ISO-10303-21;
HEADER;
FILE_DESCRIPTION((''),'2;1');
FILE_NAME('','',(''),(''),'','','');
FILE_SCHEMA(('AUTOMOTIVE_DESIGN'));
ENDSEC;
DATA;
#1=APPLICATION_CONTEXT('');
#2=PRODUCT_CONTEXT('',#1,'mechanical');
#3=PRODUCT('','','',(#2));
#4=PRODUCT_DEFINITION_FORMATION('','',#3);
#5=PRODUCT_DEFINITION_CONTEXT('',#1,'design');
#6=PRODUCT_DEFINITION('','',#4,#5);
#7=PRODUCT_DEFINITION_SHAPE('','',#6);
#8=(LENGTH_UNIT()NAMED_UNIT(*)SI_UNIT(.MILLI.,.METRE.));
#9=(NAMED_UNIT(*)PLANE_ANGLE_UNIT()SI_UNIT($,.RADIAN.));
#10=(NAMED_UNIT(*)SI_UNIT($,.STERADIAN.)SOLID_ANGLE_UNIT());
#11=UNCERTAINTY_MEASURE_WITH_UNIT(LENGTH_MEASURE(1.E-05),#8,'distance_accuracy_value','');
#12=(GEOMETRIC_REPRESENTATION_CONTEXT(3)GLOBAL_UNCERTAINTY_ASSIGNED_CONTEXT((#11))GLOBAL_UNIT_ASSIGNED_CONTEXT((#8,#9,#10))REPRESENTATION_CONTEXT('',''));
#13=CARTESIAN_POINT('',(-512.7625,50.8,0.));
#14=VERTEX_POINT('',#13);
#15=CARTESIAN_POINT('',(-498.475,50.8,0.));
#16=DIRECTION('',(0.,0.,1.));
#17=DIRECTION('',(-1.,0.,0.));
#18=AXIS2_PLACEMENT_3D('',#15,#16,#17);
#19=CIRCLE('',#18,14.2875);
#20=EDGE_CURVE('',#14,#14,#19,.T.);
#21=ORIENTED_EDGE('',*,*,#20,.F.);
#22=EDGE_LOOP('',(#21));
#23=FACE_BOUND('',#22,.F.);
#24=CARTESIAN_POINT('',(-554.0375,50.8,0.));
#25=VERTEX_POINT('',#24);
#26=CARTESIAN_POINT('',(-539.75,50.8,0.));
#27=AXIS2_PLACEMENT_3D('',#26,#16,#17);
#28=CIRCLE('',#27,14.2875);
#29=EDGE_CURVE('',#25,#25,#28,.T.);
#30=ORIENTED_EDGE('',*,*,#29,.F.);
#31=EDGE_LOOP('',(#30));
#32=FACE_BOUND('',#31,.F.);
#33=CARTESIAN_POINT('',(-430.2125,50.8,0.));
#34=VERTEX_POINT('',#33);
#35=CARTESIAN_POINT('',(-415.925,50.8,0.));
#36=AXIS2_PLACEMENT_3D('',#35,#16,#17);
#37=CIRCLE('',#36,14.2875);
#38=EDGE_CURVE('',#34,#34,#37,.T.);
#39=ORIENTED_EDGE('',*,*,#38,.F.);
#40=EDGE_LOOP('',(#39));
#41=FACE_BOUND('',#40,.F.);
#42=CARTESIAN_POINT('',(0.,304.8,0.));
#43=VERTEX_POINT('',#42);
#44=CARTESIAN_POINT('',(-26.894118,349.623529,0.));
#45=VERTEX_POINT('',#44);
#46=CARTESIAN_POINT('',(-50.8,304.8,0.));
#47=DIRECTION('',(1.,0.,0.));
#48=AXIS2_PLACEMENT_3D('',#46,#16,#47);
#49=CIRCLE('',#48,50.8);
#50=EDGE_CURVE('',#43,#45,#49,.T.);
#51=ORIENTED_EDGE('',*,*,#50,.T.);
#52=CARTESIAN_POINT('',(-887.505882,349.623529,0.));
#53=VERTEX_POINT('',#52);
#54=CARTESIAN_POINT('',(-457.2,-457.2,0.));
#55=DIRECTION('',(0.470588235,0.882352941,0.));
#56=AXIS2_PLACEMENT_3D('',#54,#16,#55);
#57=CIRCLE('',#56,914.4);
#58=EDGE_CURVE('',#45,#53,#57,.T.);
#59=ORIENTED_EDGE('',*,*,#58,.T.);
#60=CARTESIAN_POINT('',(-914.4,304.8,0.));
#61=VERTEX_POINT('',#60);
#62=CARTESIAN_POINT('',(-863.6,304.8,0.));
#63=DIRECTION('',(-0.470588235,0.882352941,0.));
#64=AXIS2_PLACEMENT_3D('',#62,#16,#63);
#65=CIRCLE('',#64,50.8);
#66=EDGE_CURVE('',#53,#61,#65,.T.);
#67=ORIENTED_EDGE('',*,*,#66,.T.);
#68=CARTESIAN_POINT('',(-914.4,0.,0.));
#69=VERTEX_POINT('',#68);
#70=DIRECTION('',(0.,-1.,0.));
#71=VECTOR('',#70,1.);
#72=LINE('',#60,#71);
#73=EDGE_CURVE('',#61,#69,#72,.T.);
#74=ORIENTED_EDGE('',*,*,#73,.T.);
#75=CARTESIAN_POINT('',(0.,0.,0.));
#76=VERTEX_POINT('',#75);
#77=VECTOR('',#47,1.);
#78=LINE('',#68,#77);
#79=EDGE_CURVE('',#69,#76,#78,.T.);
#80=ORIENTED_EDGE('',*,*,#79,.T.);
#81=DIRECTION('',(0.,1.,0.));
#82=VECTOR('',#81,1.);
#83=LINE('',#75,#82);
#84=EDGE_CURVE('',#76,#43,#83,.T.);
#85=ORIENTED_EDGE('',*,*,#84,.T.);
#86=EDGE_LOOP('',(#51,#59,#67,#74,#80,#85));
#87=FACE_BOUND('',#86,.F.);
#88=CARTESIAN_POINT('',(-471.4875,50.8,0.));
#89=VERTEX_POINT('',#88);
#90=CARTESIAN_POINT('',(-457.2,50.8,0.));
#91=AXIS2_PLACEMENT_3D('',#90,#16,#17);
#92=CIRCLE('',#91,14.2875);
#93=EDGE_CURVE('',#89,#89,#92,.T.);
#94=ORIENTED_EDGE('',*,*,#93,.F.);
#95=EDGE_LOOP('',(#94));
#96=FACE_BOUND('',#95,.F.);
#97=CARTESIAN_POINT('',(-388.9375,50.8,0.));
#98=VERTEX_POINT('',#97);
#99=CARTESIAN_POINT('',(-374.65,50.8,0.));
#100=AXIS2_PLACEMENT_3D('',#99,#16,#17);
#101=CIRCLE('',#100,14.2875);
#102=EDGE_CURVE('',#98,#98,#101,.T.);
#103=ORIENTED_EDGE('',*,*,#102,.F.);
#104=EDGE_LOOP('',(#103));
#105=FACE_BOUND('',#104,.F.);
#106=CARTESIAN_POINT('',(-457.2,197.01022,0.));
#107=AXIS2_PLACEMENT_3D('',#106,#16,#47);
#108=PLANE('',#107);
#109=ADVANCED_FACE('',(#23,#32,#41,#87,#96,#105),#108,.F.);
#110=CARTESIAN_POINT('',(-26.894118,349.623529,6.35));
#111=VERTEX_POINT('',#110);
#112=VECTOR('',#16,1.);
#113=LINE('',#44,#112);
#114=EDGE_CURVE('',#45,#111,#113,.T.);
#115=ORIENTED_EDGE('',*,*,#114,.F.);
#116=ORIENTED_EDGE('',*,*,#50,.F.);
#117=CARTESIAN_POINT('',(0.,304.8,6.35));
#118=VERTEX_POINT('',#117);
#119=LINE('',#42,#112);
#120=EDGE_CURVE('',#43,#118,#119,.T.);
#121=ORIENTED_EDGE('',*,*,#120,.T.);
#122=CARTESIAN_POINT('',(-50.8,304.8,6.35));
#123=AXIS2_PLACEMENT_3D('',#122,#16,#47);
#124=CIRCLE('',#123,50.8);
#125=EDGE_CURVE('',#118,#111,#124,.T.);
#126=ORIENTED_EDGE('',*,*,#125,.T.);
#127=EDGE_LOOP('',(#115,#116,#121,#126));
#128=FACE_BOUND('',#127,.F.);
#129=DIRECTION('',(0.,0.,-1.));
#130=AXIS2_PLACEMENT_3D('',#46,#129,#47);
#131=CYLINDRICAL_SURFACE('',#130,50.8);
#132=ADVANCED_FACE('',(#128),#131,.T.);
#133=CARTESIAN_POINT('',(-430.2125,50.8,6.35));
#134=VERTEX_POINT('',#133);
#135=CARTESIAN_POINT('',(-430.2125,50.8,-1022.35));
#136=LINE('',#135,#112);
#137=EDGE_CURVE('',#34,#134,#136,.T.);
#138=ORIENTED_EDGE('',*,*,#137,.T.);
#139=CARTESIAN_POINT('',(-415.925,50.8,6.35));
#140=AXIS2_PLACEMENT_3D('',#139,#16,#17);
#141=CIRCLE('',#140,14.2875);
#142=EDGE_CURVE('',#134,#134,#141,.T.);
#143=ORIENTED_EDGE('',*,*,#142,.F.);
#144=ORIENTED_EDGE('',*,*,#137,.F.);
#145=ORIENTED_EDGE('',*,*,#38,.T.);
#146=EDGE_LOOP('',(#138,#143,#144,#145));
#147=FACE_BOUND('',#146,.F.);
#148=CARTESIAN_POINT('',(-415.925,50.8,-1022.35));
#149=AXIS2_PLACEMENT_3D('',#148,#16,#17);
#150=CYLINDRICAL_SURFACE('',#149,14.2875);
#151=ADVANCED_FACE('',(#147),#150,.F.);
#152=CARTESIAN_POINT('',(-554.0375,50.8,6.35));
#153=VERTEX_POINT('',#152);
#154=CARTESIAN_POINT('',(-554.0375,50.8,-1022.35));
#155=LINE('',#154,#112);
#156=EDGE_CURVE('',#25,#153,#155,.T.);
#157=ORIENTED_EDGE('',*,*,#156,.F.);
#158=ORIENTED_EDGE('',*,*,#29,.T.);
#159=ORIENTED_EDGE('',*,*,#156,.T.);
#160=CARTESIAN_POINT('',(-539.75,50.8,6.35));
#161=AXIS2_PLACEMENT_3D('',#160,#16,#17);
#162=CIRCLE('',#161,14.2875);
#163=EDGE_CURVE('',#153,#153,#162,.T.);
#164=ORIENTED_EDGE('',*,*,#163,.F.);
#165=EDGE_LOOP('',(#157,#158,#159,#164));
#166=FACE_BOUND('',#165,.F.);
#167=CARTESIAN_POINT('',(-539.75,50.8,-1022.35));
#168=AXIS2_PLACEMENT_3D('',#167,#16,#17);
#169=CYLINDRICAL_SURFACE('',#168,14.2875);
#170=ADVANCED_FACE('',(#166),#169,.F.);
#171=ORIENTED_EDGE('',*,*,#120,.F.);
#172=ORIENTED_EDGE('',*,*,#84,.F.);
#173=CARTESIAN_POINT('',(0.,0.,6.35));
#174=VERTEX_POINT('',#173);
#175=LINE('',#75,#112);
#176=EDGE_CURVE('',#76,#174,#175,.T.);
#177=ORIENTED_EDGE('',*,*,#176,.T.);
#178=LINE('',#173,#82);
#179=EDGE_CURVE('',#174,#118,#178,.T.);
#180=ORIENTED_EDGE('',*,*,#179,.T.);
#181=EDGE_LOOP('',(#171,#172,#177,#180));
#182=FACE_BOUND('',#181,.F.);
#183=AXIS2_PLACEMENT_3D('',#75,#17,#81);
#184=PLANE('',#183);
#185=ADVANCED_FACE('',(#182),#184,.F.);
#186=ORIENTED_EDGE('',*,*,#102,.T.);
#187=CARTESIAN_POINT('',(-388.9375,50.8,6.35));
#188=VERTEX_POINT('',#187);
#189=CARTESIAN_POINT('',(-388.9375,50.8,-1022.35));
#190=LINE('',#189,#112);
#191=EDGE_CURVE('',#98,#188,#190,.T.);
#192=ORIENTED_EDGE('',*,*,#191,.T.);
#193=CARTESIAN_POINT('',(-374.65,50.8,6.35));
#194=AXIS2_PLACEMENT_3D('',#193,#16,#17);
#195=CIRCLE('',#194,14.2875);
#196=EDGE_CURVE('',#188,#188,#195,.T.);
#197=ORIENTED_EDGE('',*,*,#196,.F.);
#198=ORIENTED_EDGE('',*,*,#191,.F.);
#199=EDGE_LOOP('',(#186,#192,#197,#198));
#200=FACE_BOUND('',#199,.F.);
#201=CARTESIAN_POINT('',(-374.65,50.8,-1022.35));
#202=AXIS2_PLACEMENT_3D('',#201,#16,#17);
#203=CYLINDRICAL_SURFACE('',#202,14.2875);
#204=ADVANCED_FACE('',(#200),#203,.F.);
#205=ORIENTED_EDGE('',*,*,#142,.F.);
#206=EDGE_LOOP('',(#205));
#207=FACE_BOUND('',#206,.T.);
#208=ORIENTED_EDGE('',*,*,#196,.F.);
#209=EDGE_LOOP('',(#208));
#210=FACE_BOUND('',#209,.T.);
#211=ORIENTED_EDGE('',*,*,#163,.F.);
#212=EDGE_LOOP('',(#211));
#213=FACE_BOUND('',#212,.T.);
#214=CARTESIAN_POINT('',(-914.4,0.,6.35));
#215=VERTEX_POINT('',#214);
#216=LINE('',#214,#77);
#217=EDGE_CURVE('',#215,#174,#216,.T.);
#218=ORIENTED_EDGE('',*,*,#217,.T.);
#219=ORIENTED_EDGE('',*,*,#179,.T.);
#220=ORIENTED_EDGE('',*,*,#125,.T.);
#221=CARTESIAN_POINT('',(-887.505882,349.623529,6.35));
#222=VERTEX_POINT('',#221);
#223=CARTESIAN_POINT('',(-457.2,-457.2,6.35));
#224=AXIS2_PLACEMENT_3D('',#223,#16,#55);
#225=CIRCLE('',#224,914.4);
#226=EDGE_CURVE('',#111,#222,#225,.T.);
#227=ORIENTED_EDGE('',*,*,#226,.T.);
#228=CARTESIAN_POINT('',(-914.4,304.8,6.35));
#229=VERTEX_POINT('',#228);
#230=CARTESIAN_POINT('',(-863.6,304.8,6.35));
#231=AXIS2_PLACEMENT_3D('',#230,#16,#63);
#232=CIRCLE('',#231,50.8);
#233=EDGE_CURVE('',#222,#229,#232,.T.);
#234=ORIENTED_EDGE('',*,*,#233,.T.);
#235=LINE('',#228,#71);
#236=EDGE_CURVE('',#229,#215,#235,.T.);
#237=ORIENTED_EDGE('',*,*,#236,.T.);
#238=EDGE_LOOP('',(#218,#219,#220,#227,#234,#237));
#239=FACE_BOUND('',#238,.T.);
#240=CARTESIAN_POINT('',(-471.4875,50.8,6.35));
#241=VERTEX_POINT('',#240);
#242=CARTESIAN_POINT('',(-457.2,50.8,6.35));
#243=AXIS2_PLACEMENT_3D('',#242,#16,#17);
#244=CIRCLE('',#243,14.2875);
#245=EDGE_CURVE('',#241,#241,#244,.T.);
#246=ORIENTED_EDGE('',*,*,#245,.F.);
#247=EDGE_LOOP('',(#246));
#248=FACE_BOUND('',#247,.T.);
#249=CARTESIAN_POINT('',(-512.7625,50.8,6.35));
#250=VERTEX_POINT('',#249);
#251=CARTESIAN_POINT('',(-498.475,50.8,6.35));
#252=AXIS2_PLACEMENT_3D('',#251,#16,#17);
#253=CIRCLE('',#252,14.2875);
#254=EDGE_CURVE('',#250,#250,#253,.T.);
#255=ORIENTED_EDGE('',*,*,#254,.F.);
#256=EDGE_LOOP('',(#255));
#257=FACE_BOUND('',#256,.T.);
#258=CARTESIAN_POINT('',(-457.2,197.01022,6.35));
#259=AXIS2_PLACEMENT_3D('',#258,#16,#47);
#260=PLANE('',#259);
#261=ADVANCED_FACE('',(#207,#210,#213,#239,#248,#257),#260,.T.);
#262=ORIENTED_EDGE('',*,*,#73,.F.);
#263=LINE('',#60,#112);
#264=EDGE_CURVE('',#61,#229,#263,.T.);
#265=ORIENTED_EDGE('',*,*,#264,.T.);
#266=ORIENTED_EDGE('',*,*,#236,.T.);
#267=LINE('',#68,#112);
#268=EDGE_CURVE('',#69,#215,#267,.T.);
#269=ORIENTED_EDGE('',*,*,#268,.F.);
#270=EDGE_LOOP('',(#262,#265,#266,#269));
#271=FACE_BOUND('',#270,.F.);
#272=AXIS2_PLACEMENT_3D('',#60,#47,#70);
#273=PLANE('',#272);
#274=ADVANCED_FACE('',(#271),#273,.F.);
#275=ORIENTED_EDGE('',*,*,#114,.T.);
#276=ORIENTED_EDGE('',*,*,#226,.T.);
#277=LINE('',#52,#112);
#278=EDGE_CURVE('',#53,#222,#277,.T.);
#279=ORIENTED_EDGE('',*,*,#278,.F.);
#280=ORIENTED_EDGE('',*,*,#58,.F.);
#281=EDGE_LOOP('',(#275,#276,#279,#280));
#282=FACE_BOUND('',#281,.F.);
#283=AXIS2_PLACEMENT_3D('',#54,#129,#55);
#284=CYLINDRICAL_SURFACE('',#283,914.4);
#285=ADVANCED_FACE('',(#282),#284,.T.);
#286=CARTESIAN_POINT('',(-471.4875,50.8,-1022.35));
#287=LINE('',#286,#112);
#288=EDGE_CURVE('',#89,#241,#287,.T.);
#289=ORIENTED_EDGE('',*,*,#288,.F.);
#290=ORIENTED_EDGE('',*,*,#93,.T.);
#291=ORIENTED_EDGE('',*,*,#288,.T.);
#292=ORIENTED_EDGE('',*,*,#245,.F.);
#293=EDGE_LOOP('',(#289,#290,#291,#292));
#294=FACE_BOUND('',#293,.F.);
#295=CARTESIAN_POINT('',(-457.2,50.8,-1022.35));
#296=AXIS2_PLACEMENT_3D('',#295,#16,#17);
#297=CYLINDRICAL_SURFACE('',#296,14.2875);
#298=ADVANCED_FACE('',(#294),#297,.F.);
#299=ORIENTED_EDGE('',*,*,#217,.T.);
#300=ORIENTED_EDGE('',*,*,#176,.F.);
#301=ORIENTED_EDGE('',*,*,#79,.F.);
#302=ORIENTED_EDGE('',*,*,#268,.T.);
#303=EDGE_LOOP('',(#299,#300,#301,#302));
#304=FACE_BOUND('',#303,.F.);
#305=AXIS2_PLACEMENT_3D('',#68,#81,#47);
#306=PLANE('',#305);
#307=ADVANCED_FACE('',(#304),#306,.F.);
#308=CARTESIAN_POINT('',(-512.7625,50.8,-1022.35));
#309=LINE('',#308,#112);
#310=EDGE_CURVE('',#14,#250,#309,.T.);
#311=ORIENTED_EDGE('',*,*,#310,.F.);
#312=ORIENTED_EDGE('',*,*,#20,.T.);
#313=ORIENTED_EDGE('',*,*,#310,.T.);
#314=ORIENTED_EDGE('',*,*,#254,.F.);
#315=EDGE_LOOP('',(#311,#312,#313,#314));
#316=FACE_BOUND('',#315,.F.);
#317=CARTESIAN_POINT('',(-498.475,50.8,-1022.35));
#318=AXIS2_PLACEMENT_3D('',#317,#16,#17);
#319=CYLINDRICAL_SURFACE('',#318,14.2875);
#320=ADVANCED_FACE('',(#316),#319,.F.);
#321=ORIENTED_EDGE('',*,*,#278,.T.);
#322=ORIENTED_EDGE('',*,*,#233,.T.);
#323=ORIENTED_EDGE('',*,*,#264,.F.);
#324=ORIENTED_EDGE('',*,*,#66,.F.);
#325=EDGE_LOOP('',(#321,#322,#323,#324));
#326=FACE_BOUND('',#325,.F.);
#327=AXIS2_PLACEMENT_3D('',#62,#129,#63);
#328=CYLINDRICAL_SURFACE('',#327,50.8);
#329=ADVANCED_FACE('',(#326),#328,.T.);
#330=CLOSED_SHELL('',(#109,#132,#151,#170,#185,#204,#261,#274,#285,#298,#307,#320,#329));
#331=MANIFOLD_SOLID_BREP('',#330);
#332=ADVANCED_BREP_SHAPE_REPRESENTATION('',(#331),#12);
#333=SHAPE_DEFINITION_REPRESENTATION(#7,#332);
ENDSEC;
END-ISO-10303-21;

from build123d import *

# Parameters (mm, degrees)
F1_DEPTH = 6.35
F3_D     = 28.575


# Not quite as in the source:
# - a feature names something its author has since deleted; it is built from what else it names


with BuildPart() as f1:
    # F0 (on Top) → F1 (new body)
    with BuildSketch(Plane.XY):
        with BuildLine():
            Line((-914.4, 0), (0, 0))
            Line((0, 0), (0, 304.8))
            ThreePointArc((0, 304.8), (-7.2393593738, 330.9363843757), (-26.8941176471, 349.6235294118))
            ThreePointArc((-26.8941176471, 349.6235294118), (-457.2, 457.2), (-887.5058823529, 349.6235294118))
            ThreePointArc((-887.5058823529, 349.6235294118), (-907.1606406262, 330.9363843757), (-914.4, 304.8))
            Line((-914.4, 304.8), (-914.4, 0))
        make_face()
    extrude(amount=F1_DEPTH)

    # F3 (through all)
    with Locations(Plane(origin=(0, 0, 0), x_dir=(1, 0, 0), z_dir=(0, 0, -1))):
        with Locations((-415.925, -50.8), (-374.65, -50.8), (-457.2, -50.8), (-498.475, -50.8), (-539.75, -50.8)):
            Hole(F3_D / 2)


solid = f1.part
